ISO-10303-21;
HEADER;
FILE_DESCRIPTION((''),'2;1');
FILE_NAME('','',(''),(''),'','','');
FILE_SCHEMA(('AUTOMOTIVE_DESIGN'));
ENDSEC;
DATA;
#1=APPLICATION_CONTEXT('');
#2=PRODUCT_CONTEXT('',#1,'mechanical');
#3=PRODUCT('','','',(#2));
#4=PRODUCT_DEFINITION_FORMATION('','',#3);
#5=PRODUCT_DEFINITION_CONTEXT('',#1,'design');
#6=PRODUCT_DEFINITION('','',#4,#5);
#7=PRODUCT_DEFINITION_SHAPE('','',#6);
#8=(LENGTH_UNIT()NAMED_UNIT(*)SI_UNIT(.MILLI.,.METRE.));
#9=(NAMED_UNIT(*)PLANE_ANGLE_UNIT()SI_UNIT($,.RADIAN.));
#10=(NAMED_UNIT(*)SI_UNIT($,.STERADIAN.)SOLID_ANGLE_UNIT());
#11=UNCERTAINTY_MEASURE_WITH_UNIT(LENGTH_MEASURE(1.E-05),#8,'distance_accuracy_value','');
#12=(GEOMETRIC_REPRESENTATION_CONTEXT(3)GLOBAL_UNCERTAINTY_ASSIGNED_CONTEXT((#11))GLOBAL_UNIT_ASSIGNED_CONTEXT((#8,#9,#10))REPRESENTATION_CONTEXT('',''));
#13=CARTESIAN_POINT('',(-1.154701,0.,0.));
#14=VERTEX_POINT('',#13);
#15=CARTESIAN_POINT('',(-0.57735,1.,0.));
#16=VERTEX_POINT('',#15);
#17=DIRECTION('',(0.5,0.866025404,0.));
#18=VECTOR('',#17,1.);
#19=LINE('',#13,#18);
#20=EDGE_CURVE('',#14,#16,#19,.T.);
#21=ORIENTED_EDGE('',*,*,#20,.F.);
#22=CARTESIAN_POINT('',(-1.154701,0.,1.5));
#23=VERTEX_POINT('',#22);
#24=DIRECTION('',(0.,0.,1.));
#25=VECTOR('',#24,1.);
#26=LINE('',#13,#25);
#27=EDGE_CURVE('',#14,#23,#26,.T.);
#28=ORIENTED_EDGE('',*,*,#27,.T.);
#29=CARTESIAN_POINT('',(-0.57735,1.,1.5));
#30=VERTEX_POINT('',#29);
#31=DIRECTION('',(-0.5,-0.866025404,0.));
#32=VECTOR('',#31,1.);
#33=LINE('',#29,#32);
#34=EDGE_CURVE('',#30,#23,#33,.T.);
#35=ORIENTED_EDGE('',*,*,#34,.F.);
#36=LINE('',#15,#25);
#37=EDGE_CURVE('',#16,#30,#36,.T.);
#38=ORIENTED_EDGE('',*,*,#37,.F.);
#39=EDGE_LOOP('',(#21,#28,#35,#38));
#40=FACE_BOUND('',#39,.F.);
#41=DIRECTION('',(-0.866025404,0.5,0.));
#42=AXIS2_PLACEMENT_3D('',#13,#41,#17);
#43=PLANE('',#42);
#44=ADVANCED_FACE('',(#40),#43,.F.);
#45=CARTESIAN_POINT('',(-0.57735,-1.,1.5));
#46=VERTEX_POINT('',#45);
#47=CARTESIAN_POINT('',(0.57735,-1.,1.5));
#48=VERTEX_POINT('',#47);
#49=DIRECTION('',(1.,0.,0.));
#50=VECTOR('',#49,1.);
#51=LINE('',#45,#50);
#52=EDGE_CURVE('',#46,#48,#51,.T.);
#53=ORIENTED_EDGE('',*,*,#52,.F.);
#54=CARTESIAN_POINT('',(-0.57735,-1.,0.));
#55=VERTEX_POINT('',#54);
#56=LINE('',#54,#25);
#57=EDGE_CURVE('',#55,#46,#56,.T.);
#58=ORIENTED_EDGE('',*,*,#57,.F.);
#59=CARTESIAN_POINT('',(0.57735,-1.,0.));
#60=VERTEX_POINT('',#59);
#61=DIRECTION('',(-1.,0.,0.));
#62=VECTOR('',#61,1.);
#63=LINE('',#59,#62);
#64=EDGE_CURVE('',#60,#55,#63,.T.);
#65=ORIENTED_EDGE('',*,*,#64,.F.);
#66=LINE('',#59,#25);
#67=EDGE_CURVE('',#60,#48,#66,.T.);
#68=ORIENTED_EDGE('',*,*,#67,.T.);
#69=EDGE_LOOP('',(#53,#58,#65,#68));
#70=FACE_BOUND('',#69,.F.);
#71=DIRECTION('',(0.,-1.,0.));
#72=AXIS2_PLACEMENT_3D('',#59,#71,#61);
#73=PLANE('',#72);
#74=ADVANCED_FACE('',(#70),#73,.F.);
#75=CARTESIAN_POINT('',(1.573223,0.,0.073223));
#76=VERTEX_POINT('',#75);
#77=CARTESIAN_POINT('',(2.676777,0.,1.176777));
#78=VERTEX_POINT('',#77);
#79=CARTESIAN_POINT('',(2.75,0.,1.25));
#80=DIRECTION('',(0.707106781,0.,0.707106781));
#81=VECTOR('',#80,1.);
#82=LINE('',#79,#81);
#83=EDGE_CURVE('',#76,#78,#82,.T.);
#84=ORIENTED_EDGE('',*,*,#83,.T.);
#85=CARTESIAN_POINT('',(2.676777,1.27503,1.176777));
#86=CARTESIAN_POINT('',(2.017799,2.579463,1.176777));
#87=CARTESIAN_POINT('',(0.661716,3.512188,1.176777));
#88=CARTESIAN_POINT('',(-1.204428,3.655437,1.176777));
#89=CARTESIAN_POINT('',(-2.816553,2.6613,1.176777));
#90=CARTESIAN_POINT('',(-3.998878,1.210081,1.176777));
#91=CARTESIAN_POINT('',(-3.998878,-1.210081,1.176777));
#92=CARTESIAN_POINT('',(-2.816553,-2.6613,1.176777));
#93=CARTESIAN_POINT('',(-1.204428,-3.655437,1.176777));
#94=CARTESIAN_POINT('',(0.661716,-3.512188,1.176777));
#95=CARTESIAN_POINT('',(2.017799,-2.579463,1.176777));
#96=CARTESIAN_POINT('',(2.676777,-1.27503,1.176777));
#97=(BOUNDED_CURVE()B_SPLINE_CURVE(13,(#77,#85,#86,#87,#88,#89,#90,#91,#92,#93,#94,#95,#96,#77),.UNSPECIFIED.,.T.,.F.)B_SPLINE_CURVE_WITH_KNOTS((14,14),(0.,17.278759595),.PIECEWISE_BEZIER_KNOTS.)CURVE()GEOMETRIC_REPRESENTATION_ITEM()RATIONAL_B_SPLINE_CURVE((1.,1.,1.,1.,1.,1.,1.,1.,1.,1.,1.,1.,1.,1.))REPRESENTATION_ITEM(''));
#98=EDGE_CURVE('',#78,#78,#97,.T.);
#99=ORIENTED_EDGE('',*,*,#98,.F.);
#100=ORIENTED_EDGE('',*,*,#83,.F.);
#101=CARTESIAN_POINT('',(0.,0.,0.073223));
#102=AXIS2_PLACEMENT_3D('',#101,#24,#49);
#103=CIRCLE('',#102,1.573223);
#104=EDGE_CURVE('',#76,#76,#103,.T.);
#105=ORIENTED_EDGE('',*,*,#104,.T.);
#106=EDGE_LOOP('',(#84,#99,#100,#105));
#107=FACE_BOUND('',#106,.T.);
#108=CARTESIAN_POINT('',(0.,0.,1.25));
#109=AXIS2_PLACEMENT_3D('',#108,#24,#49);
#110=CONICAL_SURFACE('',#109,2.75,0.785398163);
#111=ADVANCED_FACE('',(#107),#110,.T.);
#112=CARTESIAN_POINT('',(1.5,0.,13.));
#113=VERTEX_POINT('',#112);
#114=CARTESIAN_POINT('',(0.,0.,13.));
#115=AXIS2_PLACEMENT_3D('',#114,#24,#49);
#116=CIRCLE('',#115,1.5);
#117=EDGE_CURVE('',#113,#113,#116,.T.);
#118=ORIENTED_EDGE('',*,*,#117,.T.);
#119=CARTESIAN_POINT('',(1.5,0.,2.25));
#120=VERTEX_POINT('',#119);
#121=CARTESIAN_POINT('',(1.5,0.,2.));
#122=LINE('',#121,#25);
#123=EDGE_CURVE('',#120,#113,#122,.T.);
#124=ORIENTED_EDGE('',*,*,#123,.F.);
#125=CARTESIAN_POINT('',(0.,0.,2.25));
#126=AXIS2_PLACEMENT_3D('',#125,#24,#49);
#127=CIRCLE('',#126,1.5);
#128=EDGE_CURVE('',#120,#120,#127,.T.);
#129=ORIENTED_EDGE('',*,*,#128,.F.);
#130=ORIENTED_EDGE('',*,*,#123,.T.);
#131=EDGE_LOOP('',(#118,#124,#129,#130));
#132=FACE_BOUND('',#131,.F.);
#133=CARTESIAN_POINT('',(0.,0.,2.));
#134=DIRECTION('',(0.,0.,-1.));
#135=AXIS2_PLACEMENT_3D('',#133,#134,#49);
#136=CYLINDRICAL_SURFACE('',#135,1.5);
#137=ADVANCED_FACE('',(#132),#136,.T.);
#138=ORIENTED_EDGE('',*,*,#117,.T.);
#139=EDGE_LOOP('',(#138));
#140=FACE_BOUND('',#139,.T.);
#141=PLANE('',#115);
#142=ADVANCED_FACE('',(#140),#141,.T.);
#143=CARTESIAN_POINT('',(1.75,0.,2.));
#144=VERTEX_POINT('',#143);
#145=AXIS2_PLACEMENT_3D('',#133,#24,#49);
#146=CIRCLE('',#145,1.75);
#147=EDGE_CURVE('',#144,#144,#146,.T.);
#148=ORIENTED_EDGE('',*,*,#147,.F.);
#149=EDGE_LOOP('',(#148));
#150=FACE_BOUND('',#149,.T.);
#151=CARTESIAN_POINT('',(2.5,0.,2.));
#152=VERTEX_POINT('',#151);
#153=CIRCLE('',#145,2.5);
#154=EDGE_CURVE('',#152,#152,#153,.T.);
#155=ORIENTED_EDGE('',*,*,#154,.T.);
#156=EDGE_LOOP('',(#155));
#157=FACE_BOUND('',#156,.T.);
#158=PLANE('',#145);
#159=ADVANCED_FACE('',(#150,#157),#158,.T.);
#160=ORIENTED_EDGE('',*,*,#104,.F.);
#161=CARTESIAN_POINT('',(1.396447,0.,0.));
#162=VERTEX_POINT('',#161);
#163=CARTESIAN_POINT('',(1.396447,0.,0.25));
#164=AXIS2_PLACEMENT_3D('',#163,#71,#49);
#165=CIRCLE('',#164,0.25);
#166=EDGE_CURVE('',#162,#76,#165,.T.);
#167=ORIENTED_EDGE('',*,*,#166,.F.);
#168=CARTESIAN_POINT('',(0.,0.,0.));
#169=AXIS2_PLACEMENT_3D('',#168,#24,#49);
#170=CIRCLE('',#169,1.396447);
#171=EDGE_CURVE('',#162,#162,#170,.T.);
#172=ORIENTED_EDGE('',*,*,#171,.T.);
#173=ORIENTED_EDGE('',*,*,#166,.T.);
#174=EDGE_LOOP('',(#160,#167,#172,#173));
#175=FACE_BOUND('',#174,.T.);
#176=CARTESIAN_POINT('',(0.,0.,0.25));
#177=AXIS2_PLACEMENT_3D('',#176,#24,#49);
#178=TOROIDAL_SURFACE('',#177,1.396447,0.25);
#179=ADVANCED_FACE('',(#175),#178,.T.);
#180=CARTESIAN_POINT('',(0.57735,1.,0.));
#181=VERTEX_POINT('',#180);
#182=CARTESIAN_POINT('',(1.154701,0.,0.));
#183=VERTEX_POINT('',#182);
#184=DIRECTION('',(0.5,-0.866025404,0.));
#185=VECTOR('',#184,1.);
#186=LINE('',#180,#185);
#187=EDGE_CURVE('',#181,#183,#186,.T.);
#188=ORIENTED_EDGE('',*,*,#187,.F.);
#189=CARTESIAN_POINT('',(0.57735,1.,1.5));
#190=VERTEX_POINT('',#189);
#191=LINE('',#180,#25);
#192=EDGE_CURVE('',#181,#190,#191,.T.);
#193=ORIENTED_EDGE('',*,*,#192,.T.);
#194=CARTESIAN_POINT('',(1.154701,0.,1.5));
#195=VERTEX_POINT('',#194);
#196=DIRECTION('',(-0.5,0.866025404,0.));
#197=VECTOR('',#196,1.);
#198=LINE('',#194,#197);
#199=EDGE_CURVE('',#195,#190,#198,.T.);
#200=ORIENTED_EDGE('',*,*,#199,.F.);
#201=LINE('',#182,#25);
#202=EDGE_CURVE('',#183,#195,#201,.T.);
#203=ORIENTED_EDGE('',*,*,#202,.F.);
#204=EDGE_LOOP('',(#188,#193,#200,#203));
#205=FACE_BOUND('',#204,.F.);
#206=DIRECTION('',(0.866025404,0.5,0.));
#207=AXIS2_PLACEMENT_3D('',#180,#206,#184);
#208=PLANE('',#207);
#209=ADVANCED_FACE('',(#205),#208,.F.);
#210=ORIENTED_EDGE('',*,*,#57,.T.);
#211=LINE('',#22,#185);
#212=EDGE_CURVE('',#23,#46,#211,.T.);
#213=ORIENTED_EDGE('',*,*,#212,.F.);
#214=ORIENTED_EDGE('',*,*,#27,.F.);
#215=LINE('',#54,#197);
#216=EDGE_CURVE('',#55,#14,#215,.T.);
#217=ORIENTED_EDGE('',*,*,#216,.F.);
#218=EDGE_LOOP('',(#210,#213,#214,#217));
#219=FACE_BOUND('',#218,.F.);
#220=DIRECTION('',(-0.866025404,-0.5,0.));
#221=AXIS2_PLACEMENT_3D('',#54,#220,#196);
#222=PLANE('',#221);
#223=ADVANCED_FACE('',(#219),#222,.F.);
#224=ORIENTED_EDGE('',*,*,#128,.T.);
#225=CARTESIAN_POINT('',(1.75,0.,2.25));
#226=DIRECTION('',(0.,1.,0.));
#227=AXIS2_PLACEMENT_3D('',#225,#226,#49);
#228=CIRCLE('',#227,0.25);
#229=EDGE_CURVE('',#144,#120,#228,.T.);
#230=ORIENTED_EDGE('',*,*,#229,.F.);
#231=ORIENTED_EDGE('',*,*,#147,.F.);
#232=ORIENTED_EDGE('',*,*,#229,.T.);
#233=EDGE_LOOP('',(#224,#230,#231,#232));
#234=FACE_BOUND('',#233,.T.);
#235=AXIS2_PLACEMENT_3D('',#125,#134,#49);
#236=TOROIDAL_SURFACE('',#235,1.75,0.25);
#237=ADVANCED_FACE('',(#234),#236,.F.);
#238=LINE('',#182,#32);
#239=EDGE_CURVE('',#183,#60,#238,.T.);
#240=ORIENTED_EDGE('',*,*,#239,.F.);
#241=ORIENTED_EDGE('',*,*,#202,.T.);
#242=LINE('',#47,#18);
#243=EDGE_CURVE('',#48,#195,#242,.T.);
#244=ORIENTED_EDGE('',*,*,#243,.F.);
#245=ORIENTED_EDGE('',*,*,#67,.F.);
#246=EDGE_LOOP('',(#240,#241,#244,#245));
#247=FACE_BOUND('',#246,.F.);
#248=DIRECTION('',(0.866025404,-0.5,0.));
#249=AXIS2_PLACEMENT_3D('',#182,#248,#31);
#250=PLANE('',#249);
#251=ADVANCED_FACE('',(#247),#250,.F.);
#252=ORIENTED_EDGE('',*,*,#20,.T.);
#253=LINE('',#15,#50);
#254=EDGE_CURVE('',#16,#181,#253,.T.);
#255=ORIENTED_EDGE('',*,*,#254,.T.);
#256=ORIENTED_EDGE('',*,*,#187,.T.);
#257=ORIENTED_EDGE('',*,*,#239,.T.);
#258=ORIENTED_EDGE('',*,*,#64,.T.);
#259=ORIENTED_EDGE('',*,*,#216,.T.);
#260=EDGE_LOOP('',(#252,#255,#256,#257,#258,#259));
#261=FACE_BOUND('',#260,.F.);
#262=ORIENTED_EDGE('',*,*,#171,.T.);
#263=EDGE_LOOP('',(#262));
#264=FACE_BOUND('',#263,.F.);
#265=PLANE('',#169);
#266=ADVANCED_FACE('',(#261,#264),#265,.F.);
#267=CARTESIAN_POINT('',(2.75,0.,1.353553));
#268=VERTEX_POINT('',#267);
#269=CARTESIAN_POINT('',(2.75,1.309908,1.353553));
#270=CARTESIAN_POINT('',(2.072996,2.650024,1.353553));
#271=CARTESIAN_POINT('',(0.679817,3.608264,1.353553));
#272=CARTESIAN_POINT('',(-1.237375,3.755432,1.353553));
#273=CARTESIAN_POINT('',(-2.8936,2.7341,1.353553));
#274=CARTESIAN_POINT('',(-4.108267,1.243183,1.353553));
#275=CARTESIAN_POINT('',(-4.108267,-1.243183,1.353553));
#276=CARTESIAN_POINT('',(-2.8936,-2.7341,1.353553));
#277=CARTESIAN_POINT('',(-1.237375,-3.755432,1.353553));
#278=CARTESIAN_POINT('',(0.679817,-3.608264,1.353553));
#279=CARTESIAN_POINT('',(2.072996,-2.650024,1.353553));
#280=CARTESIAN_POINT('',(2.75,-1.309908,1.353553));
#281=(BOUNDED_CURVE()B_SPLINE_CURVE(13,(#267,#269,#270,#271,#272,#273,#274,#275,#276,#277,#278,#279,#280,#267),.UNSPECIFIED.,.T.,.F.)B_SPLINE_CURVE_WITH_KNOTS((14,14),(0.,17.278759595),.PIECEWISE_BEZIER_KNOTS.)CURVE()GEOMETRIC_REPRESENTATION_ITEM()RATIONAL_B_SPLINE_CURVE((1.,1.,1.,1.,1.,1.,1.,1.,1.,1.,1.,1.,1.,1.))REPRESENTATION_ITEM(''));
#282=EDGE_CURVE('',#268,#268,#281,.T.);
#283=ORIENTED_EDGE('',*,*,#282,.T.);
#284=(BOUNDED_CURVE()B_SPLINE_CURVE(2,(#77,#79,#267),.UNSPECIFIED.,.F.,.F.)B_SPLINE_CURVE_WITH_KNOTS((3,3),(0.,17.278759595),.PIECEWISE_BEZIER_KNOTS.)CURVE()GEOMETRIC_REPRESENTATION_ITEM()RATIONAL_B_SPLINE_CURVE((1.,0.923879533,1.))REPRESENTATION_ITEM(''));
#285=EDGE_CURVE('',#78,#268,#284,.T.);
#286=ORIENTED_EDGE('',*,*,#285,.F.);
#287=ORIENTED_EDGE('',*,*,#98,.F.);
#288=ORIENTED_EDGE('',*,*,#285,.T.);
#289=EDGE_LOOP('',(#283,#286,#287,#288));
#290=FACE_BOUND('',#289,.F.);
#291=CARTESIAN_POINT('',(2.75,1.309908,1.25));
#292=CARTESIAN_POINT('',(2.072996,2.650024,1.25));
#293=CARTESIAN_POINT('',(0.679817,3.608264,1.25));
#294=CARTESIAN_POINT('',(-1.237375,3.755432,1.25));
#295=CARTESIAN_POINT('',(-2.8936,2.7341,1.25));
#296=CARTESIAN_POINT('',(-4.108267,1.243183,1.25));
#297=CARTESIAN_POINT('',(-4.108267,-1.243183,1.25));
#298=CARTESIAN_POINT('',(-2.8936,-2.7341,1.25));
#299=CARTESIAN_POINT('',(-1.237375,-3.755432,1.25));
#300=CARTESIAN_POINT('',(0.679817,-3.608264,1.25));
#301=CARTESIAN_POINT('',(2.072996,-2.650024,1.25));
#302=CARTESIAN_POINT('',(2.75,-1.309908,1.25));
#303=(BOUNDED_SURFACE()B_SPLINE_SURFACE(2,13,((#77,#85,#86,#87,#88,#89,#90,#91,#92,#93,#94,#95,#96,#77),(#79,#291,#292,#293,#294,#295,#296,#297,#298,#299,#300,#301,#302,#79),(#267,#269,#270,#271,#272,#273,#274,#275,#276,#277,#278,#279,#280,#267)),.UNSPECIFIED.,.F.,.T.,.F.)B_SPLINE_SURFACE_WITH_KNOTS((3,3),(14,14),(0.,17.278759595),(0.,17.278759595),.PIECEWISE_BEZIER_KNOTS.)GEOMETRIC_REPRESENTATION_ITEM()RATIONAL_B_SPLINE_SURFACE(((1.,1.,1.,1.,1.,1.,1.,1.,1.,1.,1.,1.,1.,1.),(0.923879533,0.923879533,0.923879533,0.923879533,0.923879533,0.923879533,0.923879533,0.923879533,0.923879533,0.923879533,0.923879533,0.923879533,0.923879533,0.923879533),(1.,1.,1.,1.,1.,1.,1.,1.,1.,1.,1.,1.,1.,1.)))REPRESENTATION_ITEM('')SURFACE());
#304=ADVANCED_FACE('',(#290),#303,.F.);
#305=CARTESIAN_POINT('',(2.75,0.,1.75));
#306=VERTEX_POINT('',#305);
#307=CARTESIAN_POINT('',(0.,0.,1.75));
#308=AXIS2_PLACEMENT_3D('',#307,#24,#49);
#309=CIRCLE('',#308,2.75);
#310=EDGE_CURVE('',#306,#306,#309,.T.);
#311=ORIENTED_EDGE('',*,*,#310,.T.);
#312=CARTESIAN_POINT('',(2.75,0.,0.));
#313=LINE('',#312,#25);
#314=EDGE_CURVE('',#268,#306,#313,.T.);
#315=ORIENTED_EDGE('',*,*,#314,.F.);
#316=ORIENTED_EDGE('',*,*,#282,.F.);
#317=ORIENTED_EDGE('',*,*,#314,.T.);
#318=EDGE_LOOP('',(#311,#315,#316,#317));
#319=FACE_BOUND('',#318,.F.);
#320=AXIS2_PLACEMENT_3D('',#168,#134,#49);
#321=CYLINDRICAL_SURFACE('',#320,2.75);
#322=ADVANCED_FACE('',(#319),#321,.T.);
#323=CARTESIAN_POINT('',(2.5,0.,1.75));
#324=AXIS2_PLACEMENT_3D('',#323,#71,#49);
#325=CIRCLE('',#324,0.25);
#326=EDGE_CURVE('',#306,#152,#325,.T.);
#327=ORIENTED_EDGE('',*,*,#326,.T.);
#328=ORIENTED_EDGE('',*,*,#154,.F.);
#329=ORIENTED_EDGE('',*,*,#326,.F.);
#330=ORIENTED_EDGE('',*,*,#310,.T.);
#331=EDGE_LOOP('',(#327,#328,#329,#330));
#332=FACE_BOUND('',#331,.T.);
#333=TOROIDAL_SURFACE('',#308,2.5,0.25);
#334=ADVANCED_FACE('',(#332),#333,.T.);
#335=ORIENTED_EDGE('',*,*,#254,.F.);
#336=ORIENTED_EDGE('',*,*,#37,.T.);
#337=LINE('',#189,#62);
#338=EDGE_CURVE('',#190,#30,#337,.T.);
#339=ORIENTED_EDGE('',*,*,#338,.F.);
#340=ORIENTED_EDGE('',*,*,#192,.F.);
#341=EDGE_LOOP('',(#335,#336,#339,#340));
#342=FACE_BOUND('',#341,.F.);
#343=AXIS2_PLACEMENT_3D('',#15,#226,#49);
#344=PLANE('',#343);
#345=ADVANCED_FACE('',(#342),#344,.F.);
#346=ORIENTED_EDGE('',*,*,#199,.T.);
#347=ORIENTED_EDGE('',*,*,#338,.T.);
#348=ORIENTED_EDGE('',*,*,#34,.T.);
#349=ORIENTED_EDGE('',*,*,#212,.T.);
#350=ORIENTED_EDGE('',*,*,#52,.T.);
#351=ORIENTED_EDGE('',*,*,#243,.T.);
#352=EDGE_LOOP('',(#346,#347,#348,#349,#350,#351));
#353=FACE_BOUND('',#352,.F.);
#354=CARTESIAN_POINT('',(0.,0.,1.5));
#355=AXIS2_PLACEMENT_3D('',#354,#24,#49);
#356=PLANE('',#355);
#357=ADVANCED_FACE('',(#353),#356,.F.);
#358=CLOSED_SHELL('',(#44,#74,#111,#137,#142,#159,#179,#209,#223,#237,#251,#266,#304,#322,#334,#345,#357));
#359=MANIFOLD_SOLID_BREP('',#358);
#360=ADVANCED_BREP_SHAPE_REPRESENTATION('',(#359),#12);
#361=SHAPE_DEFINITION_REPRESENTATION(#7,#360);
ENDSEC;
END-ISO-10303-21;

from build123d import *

# Parameters (mm, degrees)
F1_R     = 2.75
F1_R_2   = 1.5
F2_DEPTH = 2
F3_START = 1.5
F3_DEPTH = 0.5
F4_START = 2
F4_DEPTH = 11
F5_SIZE2 = 1.25
F5_SIZE  = 1.25
F6_R     = 0.25


# Not quite as in the source:
# - a feature names something its author has since deleted; it is built from what else it names


with BuildPart() as f2:
    # F1 (on Top) → F2 (new body)
    with BuildSketch(Plane.XY):
        Circle(F1_R)
        Circle(F1_R_2, mode=Mode.SUBTRACT)
        Circle(F1_R_2)
        Polygon((-0.5773502692, -1), (-1.1547005384, 0), (-0.5773502692, 1), (0.5773502692, 1), (1.1547005384, 0), (0.5773502692, -1), align=None, mode=Mode.SUBTRACT)
    extrude(amount=F2_DEPTH)

    # F1 (on Top) → F3 (join)
    with BuildSketch(Plane.XY.offset(F3_START)):
        Polygon((-0.5773502692, 1), (-1.1547005384, 0), (-0.5773502692, -1), (0.5773502692, -1), (1.1547005384, 0), (0.5773502692, 1), align=None)
    extrude(amount=F3_DEPTH)

    # F1 (on Top) → F4 (join)
    with BuildSketch(Plane.XY.offset(F4_START)):
        Circle(F1_R_2)
        Polygon((-0.5773502692, -1), (-1.1547005384, 0), (-0.5773502692, 1), (0.5773502692, 1), (1.1547005384, 0), (0.5773502692, -1), align=None, mode=Mode.SUBTRACT)
        Polygon((-0.5773502692, 1), (-1.1547005384, 0), (-0.5773502692, -1), (0.5773502692, -1), (1.1547005384, 0), (0.5773502692, 1), align=None)
    extrude(amount=F4_DEPTH)

    # F5
    f5_edges = [f2.edges().sort_by_distance(p)[0] for p in [
        (-2.75, 0, 0),
    ]]
    chamfer(f5_edges, length=F5_SIZE, length2=F5_SIZE2)

    # F6
    f6_edges = [f2.edges().sort_by_distance(p)[0] for p in [
        (-2.75, 0, 2),
        (-1.5, 0, 2),
        (-1.5, 0, 0),
        (-2.75, 0, 1.25),
    ]]
    fillet(f6_edges, radius=F6_R)


solid = f2.part
